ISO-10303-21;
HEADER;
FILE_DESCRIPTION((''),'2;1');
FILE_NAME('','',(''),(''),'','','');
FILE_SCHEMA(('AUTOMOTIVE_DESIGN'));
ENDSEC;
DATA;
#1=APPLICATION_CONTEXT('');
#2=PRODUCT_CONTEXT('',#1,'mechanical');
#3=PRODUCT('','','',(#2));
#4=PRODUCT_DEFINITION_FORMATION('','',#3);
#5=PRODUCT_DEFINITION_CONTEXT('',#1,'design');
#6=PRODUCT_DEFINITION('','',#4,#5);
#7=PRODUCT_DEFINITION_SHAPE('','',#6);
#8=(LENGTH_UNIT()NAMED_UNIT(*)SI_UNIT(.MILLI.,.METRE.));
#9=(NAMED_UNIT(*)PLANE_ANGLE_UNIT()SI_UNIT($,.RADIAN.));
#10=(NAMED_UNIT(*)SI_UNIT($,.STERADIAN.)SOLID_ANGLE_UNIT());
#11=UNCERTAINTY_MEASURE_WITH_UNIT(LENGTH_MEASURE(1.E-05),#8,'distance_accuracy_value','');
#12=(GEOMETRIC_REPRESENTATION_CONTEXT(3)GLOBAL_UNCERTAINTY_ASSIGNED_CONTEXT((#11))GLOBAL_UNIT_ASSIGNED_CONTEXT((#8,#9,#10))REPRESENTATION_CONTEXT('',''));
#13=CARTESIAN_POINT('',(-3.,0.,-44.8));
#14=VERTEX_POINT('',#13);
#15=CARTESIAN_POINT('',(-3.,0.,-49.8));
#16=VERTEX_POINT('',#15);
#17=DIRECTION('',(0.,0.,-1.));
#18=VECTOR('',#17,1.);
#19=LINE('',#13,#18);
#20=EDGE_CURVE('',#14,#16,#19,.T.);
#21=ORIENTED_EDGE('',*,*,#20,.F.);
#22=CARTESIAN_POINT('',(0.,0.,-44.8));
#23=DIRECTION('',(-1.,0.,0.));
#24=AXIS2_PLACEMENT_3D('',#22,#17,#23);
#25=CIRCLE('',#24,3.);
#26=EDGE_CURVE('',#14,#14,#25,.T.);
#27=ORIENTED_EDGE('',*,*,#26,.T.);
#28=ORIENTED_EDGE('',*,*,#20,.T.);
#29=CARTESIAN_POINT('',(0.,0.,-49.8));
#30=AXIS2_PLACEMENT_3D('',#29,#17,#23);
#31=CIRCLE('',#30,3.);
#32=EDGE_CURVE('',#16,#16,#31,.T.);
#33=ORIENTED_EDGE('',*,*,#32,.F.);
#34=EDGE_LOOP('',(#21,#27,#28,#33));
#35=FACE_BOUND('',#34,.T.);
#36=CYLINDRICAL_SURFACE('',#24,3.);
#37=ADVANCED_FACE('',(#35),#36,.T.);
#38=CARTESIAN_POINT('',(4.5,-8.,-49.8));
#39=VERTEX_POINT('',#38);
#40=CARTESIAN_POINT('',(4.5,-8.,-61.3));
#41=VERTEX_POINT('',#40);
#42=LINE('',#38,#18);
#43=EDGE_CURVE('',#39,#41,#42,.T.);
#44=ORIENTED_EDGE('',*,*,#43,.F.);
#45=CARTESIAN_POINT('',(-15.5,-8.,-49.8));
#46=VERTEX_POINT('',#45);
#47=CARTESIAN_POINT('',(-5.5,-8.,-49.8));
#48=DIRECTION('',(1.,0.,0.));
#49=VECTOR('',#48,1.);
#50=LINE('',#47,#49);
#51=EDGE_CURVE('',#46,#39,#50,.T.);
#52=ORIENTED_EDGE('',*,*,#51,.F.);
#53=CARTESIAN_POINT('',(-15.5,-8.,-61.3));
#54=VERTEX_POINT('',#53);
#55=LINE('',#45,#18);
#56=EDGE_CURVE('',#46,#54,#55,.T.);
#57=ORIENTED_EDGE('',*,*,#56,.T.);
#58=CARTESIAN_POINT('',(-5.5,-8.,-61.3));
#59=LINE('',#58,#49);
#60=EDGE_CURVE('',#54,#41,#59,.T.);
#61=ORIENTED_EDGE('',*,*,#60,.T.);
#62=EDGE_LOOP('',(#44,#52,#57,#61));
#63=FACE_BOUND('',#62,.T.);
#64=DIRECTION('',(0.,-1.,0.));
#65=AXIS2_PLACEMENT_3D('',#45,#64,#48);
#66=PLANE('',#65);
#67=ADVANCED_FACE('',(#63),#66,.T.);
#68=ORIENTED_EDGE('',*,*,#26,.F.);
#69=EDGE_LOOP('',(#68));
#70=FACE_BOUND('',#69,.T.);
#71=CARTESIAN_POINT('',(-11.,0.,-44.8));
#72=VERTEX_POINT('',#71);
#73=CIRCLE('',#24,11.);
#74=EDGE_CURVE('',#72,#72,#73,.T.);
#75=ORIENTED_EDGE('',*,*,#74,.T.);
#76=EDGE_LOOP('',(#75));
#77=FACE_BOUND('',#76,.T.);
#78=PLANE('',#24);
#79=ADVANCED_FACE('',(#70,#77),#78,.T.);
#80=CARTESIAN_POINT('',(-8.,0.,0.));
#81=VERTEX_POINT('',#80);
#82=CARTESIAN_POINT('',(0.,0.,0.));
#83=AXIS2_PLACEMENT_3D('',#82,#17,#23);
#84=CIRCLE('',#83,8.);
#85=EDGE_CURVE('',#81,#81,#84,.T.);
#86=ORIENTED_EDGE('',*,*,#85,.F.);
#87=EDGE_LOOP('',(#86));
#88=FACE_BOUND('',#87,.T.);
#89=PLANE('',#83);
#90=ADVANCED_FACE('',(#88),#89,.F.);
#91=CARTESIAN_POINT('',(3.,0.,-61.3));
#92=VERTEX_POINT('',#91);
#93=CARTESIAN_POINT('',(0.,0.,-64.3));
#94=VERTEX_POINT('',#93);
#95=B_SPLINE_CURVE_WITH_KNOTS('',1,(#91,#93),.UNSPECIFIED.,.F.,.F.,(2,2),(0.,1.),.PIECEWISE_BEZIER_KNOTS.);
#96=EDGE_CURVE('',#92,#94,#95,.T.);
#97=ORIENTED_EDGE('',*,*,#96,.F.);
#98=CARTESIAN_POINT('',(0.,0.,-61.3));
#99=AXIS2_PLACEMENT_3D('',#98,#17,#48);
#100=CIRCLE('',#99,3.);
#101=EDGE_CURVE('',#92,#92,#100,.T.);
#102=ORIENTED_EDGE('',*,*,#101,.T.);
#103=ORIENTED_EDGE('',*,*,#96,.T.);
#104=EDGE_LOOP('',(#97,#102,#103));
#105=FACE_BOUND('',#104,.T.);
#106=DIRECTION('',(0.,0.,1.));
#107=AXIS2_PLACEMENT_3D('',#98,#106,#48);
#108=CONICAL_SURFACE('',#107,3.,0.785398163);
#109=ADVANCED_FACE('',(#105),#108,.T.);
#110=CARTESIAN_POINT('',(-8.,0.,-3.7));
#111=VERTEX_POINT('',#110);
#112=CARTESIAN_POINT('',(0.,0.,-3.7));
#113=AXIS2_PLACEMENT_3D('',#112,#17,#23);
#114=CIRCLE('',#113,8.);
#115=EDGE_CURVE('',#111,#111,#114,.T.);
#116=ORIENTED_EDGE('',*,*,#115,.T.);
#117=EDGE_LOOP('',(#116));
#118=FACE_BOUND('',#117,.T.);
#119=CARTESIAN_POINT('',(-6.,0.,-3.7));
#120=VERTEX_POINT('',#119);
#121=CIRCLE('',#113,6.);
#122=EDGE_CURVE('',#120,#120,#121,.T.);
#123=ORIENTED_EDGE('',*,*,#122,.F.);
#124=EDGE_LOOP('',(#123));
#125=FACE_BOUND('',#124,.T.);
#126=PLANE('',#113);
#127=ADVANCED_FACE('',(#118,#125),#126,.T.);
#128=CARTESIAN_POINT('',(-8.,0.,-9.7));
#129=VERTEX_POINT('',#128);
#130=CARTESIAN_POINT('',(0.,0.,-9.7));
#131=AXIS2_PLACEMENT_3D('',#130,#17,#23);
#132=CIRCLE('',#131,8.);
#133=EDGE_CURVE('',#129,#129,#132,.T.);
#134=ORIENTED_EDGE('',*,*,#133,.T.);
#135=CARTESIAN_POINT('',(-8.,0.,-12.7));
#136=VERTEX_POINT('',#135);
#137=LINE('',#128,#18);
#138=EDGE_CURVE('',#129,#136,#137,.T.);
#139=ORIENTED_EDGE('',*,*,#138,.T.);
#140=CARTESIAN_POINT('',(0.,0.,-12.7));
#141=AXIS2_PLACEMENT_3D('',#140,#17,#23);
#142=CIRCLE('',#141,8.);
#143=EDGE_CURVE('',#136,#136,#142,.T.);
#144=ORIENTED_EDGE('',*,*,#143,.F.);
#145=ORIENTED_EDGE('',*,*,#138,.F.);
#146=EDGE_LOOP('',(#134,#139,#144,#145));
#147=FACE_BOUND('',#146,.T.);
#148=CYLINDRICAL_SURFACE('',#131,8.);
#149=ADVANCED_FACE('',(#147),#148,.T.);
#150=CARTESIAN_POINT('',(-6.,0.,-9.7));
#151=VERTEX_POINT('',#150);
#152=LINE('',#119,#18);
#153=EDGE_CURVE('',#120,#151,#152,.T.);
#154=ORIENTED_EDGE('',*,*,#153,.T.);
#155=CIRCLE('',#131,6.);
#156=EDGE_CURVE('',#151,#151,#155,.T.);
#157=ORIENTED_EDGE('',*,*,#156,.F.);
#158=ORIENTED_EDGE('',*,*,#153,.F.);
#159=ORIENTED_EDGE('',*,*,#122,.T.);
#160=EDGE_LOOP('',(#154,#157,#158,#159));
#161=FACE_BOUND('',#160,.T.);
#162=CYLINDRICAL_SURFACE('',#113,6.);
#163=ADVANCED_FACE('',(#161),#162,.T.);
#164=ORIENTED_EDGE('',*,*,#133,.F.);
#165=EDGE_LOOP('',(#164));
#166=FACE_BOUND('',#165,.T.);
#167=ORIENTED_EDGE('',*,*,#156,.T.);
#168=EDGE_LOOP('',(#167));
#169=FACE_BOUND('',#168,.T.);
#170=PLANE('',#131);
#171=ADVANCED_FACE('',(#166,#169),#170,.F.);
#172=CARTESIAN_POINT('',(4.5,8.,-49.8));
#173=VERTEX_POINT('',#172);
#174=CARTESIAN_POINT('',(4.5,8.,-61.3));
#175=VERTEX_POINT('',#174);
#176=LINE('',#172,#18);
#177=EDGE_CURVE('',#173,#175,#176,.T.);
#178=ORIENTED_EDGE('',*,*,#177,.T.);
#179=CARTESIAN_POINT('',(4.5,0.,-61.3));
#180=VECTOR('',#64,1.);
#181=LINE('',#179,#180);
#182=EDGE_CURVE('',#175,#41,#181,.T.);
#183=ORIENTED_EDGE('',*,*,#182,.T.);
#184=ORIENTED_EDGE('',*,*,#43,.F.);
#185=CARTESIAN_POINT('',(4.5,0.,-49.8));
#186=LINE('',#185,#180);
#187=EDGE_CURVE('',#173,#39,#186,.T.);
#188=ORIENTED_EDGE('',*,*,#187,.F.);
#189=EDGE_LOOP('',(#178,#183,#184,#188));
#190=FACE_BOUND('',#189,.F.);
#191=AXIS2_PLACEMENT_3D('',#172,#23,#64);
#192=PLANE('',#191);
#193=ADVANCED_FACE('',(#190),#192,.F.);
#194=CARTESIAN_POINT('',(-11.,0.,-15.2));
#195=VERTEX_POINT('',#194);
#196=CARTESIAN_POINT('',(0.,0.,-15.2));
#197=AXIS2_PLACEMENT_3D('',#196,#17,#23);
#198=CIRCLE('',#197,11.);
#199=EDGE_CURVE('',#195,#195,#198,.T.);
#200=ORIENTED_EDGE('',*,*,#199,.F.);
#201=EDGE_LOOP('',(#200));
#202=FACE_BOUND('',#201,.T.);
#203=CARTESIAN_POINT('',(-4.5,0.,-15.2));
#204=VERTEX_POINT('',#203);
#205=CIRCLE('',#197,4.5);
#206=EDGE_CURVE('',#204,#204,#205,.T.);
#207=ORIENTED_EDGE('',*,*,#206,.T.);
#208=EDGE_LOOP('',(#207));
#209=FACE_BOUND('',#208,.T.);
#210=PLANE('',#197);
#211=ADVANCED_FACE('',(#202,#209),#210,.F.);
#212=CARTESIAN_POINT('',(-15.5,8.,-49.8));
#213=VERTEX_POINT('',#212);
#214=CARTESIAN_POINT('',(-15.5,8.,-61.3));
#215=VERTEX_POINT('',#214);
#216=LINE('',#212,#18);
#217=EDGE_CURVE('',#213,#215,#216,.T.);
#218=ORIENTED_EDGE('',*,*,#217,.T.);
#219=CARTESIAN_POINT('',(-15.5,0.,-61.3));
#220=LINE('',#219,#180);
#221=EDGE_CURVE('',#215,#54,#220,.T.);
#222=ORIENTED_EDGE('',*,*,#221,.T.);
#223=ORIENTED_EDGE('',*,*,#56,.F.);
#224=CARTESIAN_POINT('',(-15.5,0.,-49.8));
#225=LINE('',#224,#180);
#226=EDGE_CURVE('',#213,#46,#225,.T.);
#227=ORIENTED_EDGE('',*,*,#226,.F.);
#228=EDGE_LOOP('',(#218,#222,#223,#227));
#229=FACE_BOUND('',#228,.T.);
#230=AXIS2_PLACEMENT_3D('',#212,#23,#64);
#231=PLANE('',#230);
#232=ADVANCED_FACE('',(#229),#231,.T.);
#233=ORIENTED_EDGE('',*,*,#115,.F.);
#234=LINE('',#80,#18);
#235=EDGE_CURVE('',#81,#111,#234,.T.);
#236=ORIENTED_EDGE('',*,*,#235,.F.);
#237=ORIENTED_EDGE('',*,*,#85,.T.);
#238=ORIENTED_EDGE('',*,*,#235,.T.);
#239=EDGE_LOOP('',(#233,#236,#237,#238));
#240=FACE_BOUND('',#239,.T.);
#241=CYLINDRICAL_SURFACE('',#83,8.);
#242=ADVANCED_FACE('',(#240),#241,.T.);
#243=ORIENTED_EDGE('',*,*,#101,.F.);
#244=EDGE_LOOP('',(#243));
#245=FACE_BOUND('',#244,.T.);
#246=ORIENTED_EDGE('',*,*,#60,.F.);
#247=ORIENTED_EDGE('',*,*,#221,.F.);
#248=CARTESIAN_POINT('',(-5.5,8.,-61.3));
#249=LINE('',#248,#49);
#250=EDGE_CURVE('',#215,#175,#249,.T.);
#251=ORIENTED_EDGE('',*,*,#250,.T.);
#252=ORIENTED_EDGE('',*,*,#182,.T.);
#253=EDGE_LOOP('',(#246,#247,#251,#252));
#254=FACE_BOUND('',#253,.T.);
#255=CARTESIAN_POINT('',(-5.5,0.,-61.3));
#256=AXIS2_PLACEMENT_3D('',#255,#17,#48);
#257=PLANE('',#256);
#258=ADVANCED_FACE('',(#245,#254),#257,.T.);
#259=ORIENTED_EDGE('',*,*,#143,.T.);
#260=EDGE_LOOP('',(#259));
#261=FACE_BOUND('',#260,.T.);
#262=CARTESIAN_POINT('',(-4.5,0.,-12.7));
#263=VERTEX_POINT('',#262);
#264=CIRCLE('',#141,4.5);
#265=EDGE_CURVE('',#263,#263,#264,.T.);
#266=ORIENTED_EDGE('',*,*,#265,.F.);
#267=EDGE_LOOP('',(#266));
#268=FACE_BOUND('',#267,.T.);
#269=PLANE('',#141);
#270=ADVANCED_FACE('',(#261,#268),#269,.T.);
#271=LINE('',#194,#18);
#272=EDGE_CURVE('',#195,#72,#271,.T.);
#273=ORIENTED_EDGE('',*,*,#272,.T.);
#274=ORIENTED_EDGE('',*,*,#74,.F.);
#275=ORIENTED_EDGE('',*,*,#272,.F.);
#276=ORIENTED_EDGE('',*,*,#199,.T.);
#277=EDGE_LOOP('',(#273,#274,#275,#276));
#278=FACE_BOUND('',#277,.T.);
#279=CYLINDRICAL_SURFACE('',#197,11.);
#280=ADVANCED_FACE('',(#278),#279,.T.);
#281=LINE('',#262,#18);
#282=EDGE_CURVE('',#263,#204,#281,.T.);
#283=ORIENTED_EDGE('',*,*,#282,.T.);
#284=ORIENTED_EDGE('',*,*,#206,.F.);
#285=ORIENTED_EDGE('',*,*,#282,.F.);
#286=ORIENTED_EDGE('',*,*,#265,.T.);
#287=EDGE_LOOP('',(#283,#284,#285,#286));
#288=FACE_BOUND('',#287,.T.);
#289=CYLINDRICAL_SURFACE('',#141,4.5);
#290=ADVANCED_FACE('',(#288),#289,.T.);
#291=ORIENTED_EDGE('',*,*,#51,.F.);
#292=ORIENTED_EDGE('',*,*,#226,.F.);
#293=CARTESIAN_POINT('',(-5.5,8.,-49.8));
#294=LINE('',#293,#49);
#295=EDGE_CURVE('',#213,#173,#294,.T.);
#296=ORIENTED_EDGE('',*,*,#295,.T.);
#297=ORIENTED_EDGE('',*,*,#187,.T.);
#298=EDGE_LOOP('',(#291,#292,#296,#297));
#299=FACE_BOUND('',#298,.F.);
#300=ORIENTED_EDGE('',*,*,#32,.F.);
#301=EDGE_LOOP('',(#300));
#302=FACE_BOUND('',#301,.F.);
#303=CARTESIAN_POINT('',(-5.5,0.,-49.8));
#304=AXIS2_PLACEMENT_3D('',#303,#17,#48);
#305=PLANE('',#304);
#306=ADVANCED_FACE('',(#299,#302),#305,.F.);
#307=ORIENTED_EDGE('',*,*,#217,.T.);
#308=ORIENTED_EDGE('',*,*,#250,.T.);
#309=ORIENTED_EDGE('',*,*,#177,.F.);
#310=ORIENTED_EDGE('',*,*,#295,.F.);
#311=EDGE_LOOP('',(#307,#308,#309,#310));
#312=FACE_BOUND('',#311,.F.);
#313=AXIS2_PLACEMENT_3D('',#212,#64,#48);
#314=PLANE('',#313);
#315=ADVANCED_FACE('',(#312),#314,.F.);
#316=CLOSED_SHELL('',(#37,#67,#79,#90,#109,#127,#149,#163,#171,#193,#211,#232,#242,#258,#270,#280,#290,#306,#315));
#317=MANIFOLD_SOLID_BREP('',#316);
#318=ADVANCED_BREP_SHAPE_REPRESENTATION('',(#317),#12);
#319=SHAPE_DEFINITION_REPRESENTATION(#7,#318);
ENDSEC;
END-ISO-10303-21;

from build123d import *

# Parameters (mm, degrees)
F2_W     = 20
F2_H     = 16
F3_DEPTH = 11.5
F4_R     = 3


# Not quite as in the source:
# - an extrude whose draft closes it to a point is written as a loft to that point


with BuildPart() as f1:
    # F0 (on Front) → F1 (revolve)
    with BuildSketch(Plane.XZ):
        Polygon((0, -49.8), (0, 0), (-8, 0), (-8, -3.7), (-6, -3.7), (-6, -9.7), (-8, -9.7), (-8, -12.7), (-4.5, -12.7), (-4.5, -15.2), (-11, -15.2), (-11, -44.8), (-3, -44.8), (-3, -49.8), align=None)
    revolve(axis=Axis((0, 0, -24.9), (0, 0, -1)))

    # F2 (on face) → F3 (join)
    with BuildSketch(Plane(origin=(0, 0, -49.8), x_dir=(1, 0, 0), z_dir=(0, 0, -1))):
        with Locations((-5.5, 0)):
            Rectangle(F2_W, F2_H)
    extrude(amount=F3_DEPTH)

    # F4 (on face) → F5 section 0
    with BuildSketch(Plane(origin=(0, 0, -61.3), x_dir=(1, 0, 0), z_dir=(0, 0, -1)), mode=Mode.PRIVATE) as f5_s0:
        Circle(F4_R)
    loft([f5_s0.sketch, Vertex(0, 0, -64.3)], ruled=True)


solid = f1.part
